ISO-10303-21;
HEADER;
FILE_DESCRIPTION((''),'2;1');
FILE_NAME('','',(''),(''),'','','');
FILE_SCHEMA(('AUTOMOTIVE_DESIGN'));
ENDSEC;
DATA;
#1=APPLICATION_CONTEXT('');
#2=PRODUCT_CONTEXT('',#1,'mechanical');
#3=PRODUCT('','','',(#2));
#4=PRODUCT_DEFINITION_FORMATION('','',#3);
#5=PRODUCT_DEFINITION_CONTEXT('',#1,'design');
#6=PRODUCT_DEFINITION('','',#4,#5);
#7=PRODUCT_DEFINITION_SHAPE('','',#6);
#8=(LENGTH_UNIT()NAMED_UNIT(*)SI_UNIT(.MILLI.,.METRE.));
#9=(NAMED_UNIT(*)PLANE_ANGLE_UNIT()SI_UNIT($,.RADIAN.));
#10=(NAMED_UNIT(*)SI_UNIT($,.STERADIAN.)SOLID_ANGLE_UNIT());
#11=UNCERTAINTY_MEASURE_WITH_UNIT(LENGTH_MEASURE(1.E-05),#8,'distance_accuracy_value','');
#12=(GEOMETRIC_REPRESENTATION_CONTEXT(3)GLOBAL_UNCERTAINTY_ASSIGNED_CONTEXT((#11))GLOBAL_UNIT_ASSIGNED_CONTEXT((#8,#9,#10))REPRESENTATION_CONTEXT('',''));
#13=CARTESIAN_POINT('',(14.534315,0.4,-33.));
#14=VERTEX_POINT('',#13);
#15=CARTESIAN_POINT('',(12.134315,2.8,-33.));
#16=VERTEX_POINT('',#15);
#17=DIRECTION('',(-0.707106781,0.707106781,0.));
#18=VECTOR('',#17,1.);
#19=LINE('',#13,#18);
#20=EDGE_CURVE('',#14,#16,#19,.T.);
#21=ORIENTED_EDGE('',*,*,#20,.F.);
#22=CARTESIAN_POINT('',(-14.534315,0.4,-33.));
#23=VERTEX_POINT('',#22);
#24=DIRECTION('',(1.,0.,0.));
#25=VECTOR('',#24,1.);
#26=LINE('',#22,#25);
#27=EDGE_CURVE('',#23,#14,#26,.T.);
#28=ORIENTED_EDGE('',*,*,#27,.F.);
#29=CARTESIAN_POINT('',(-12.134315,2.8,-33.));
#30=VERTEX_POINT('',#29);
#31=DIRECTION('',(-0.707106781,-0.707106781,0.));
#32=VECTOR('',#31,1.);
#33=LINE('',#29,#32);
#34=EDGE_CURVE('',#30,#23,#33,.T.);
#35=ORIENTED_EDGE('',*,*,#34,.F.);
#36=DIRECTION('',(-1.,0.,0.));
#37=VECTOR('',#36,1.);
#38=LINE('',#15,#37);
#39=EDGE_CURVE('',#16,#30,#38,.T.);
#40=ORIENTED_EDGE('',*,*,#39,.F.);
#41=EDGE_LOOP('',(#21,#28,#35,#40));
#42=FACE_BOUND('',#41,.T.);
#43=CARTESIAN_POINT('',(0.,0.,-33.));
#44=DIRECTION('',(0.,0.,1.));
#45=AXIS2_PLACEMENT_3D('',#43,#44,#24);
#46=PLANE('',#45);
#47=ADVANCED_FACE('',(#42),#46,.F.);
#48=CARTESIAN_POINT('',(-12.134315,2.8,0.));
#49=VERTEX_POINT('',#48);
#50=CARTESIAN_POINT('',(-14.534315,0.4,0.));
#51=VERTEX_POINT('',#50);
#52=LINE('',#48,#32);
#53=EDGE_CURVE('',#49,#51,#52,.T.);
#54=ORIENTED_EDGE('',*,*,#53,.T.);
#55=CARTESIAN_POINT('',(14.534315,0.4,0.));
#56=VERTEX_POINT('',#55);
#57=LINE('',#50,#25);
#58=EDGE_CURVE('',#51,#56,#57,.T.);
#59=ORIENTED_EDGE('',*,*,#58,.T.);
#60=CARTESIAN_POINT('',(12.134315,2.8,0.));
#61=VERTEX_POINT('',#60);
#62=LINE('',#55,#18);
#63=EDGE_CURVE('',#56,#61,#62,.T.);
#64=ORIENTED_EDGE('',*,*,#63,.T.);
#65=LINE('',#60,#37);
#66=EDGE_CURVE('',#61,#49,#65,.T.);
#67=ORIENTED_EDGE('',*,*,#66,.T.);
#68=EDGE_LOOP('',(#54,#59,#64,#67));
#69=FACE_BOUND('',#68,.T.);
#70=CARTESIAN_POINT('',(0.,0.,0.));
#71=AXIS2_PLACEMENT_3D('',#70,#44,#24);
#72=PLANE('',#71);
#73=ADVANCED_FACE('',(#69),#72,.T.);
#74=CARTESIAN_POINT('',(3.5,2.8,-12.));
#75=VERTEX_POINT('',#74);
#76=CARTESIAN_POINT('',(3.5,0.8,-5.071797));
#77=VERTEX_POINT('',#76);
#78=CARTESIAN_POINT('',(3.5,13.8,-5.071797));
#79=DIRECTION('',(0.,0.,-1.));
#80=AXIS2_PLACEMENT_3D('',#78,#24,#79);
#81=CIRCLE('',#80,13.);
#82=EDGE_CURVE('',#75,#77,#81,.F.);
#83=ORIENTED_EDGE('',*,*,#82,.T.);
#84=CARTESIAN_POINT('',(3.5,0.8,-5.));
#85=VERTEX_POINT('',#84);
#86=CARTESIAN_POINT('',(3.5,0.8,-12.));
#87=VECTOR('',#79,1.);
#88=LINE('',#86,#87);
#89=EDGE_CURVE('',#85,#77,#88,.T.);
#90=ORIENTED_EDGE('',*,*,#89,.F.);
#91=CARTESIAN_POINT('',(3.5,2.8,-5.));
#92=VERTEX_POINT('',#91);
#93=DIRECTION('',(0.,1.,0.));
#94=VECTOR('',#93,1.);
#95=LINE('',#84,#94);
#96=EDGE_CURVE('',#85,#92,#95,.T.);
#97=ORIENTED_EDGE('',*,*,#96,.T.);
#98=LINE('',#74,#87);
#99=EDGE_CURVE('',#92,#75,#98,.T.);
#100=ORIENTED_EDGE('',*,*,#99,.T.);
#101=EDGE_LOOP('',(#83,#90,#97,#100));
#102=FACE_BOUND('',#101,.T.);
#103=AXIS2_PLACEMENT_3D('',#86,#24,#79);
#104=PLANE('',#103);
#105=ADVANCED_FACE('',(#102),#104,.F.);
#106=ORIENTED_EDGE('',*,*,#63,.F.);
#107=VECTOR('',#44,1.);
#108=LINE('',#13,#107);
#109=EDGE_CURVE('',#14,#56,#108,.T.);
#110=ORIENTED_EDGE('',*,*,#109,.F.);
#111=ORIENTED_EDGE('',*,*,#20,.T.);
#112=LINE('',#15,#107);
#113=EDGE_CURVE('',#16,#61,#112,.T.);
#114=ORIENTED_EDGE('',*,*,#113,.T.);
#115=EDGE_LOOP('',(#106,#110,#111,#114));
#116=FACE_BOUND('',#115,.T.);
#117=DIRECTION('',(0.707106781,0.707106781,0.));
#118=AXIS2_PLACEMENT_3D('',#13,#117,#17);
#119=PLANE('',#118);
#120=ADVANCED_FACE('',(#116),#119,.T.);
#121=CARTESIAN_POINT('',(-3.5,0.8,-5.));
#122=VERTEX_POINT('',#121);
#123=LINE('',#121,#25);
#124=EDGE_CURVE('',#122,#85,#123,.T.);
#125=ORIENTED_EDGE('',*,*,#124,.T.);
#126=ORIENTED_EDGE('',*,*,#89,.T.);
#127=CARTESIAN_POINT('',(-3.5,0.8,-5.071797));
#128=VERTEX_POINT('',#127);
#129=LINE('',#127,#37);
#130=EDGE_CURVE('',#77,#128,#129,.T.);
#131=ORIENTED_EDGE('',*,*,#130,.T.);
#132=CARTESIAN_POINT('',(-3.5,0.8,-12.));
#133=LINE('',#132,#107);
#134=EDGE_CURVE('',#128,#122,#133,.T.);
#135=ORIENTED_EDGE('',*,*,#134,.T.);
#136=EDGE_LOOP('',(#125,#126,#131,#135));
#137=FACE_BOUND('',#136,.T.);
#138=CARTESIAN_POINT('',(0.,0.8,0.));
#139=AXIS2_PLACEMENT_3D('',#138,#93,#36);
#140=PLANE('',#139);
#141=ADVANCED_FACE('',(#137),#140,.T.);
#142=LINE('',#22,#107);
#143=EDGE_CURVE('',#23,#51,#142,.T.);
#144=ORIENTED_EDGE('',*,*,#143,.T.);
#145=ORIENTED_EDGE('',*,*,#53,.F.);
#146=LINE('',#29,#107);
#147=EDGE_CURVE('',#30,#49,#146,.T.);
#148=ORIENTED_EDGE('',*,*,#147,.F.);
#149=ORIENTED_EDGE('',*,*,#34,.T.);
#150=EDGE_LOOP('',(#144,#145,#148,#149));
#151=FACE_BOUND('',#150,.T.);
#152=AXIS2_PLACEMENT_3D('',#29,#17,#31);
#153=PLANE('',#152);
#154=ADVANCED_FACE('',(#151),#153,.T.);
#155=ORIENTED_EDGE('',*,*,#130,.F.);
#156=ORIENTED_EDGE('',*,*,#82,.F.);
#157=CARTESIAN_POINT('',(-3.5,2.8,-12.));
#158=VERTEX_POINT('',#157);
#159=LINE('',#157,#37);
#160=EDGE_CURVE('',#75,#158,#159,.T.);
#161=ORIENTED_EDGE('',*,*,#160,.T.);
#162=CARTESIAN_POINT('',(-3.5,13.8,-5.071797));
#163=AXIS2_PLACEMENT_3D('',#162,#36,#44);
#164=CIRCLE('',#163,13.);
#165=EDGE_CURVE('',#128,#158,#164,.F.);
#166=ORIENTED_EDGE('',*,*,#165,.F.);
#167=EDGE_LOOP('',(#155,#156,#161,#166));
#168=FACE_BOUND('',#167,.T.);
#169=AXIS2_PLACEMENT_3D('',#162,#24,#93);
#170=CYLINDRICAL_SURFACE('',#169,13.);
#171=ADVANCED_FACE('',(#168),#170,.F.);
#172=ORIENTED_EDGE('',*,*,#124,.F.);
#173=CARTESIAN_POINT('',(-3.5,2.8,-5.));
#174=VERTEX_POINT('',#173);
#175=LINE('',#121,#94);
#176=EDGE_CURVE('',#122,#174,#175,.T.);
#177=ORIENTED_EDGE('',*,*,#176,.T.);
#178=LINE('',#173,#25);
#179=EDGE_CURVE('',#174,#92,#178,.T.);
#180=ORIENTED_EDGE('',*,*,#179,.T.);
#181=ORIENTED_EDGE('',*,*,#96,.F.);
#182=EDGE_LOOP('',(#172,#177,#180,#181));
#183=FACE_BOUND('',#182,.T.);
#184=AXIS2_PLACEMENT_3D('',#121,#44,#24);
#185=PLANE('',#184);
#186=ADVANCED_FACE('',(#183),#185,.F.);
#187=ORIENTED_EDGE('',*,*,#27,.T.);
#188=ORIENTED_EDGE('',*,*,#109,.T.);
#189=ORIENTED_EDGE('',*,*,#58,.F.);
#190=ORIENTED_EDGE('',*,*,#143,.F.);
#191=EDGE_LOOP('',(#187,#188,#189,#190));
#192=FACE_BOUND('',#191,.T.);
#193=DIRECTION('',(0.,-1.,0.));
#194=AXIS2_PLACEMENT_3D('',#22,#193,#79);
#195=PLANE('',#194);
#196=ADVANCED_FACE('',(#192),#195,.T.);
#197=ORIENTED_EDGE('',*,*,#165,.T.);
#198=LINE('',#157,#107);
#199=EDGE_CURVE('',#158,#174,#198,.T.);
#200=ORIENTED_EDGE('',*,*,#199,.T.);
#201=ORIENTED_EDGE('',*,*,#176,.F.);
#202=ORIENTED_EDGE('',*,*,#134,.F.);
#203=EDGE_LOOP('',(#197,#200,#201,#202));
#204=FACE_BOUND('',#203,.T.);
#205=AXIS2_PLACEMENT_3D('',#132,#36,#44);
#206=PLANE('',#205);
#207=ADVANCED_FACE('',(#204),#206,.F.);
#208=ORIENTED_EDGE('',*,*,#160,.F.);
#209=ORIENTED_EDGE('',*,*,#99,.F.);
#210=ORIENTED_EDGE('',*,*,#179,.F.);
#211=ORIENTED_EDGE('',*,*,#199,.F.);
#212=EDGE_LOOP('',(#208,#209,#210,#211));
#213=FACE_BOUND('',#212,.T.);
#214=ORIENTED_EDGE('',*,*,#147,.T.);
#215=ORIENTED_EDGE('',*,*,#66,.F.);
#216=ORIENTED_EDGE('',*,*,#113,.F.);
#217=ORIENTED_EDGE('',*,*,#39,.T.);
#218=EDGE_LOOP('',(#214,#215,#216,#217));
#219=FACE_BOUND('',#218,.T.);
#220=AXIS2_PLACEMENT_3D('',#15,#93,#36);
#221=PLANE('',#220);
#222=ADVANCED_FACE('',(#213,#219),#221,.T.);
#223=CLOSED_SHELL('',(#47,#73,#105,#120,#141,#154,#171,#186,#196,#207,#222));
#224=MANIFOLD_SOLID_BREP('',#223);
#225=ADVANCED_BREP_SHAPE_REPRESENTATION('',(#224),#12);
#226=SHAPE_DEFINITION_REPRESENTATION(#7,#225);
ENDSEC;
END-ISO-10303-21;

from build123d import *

# Parameters (mm, degrees)
BOSS_EXTRUDE1_DEPTH = 33
SKETCH2_W           = 7
SKETCH2_H           = 7
CUT_EXTRUDE1_DEPTH  = 2
FILLET1_R           = 13


with BuildPart() as part:
    # Sketch1 → Boss-Extrude1 (new body)
    with BuildSketch(Plane.XY):
        Polygon((-12.134314575, 2.8), (-14.534314575, 0.4), (14.534314575, 0.4), (12.134314575, 2.8), align=None)
    extrude(amount=-BOSS_EXTRUDE1_DEPTH)

    # Sketch2 → Cut-Extrude1 (cut)
    with BuildSketch(Plane(origin=(0, 2.8, 0), x_dir=(1, 0, 0), z_dir=(0, 1, 0))):
        with Locations((0, 8.5)):
            Rectangle(SKETCH2_W, SKETCH2_H)
    extrude(amount=-CUT_EXTRUDE1_DEPTH, mode=Mode.SUBTRACT)

    # Fillet1
    # the kernel refuses this fillet: 13 mm, written as the material it adds along each edge
    with BuildSketch(Plane(origin=(-3.5, 0.8, -12), x_dir=(0, 1, 0), z_dir=(1, 0, 0))) as fillet1_piece_1:
        with BuildLine():
            CenterArc((13, 6.92820323), FILLET1_R, 180, 32.204227504)
            Line((0, 6.92820323), (0, 0))
            Line((0, 0), (2, 0))
        make_face()
    extrude(amount=7)


solid = part.part
